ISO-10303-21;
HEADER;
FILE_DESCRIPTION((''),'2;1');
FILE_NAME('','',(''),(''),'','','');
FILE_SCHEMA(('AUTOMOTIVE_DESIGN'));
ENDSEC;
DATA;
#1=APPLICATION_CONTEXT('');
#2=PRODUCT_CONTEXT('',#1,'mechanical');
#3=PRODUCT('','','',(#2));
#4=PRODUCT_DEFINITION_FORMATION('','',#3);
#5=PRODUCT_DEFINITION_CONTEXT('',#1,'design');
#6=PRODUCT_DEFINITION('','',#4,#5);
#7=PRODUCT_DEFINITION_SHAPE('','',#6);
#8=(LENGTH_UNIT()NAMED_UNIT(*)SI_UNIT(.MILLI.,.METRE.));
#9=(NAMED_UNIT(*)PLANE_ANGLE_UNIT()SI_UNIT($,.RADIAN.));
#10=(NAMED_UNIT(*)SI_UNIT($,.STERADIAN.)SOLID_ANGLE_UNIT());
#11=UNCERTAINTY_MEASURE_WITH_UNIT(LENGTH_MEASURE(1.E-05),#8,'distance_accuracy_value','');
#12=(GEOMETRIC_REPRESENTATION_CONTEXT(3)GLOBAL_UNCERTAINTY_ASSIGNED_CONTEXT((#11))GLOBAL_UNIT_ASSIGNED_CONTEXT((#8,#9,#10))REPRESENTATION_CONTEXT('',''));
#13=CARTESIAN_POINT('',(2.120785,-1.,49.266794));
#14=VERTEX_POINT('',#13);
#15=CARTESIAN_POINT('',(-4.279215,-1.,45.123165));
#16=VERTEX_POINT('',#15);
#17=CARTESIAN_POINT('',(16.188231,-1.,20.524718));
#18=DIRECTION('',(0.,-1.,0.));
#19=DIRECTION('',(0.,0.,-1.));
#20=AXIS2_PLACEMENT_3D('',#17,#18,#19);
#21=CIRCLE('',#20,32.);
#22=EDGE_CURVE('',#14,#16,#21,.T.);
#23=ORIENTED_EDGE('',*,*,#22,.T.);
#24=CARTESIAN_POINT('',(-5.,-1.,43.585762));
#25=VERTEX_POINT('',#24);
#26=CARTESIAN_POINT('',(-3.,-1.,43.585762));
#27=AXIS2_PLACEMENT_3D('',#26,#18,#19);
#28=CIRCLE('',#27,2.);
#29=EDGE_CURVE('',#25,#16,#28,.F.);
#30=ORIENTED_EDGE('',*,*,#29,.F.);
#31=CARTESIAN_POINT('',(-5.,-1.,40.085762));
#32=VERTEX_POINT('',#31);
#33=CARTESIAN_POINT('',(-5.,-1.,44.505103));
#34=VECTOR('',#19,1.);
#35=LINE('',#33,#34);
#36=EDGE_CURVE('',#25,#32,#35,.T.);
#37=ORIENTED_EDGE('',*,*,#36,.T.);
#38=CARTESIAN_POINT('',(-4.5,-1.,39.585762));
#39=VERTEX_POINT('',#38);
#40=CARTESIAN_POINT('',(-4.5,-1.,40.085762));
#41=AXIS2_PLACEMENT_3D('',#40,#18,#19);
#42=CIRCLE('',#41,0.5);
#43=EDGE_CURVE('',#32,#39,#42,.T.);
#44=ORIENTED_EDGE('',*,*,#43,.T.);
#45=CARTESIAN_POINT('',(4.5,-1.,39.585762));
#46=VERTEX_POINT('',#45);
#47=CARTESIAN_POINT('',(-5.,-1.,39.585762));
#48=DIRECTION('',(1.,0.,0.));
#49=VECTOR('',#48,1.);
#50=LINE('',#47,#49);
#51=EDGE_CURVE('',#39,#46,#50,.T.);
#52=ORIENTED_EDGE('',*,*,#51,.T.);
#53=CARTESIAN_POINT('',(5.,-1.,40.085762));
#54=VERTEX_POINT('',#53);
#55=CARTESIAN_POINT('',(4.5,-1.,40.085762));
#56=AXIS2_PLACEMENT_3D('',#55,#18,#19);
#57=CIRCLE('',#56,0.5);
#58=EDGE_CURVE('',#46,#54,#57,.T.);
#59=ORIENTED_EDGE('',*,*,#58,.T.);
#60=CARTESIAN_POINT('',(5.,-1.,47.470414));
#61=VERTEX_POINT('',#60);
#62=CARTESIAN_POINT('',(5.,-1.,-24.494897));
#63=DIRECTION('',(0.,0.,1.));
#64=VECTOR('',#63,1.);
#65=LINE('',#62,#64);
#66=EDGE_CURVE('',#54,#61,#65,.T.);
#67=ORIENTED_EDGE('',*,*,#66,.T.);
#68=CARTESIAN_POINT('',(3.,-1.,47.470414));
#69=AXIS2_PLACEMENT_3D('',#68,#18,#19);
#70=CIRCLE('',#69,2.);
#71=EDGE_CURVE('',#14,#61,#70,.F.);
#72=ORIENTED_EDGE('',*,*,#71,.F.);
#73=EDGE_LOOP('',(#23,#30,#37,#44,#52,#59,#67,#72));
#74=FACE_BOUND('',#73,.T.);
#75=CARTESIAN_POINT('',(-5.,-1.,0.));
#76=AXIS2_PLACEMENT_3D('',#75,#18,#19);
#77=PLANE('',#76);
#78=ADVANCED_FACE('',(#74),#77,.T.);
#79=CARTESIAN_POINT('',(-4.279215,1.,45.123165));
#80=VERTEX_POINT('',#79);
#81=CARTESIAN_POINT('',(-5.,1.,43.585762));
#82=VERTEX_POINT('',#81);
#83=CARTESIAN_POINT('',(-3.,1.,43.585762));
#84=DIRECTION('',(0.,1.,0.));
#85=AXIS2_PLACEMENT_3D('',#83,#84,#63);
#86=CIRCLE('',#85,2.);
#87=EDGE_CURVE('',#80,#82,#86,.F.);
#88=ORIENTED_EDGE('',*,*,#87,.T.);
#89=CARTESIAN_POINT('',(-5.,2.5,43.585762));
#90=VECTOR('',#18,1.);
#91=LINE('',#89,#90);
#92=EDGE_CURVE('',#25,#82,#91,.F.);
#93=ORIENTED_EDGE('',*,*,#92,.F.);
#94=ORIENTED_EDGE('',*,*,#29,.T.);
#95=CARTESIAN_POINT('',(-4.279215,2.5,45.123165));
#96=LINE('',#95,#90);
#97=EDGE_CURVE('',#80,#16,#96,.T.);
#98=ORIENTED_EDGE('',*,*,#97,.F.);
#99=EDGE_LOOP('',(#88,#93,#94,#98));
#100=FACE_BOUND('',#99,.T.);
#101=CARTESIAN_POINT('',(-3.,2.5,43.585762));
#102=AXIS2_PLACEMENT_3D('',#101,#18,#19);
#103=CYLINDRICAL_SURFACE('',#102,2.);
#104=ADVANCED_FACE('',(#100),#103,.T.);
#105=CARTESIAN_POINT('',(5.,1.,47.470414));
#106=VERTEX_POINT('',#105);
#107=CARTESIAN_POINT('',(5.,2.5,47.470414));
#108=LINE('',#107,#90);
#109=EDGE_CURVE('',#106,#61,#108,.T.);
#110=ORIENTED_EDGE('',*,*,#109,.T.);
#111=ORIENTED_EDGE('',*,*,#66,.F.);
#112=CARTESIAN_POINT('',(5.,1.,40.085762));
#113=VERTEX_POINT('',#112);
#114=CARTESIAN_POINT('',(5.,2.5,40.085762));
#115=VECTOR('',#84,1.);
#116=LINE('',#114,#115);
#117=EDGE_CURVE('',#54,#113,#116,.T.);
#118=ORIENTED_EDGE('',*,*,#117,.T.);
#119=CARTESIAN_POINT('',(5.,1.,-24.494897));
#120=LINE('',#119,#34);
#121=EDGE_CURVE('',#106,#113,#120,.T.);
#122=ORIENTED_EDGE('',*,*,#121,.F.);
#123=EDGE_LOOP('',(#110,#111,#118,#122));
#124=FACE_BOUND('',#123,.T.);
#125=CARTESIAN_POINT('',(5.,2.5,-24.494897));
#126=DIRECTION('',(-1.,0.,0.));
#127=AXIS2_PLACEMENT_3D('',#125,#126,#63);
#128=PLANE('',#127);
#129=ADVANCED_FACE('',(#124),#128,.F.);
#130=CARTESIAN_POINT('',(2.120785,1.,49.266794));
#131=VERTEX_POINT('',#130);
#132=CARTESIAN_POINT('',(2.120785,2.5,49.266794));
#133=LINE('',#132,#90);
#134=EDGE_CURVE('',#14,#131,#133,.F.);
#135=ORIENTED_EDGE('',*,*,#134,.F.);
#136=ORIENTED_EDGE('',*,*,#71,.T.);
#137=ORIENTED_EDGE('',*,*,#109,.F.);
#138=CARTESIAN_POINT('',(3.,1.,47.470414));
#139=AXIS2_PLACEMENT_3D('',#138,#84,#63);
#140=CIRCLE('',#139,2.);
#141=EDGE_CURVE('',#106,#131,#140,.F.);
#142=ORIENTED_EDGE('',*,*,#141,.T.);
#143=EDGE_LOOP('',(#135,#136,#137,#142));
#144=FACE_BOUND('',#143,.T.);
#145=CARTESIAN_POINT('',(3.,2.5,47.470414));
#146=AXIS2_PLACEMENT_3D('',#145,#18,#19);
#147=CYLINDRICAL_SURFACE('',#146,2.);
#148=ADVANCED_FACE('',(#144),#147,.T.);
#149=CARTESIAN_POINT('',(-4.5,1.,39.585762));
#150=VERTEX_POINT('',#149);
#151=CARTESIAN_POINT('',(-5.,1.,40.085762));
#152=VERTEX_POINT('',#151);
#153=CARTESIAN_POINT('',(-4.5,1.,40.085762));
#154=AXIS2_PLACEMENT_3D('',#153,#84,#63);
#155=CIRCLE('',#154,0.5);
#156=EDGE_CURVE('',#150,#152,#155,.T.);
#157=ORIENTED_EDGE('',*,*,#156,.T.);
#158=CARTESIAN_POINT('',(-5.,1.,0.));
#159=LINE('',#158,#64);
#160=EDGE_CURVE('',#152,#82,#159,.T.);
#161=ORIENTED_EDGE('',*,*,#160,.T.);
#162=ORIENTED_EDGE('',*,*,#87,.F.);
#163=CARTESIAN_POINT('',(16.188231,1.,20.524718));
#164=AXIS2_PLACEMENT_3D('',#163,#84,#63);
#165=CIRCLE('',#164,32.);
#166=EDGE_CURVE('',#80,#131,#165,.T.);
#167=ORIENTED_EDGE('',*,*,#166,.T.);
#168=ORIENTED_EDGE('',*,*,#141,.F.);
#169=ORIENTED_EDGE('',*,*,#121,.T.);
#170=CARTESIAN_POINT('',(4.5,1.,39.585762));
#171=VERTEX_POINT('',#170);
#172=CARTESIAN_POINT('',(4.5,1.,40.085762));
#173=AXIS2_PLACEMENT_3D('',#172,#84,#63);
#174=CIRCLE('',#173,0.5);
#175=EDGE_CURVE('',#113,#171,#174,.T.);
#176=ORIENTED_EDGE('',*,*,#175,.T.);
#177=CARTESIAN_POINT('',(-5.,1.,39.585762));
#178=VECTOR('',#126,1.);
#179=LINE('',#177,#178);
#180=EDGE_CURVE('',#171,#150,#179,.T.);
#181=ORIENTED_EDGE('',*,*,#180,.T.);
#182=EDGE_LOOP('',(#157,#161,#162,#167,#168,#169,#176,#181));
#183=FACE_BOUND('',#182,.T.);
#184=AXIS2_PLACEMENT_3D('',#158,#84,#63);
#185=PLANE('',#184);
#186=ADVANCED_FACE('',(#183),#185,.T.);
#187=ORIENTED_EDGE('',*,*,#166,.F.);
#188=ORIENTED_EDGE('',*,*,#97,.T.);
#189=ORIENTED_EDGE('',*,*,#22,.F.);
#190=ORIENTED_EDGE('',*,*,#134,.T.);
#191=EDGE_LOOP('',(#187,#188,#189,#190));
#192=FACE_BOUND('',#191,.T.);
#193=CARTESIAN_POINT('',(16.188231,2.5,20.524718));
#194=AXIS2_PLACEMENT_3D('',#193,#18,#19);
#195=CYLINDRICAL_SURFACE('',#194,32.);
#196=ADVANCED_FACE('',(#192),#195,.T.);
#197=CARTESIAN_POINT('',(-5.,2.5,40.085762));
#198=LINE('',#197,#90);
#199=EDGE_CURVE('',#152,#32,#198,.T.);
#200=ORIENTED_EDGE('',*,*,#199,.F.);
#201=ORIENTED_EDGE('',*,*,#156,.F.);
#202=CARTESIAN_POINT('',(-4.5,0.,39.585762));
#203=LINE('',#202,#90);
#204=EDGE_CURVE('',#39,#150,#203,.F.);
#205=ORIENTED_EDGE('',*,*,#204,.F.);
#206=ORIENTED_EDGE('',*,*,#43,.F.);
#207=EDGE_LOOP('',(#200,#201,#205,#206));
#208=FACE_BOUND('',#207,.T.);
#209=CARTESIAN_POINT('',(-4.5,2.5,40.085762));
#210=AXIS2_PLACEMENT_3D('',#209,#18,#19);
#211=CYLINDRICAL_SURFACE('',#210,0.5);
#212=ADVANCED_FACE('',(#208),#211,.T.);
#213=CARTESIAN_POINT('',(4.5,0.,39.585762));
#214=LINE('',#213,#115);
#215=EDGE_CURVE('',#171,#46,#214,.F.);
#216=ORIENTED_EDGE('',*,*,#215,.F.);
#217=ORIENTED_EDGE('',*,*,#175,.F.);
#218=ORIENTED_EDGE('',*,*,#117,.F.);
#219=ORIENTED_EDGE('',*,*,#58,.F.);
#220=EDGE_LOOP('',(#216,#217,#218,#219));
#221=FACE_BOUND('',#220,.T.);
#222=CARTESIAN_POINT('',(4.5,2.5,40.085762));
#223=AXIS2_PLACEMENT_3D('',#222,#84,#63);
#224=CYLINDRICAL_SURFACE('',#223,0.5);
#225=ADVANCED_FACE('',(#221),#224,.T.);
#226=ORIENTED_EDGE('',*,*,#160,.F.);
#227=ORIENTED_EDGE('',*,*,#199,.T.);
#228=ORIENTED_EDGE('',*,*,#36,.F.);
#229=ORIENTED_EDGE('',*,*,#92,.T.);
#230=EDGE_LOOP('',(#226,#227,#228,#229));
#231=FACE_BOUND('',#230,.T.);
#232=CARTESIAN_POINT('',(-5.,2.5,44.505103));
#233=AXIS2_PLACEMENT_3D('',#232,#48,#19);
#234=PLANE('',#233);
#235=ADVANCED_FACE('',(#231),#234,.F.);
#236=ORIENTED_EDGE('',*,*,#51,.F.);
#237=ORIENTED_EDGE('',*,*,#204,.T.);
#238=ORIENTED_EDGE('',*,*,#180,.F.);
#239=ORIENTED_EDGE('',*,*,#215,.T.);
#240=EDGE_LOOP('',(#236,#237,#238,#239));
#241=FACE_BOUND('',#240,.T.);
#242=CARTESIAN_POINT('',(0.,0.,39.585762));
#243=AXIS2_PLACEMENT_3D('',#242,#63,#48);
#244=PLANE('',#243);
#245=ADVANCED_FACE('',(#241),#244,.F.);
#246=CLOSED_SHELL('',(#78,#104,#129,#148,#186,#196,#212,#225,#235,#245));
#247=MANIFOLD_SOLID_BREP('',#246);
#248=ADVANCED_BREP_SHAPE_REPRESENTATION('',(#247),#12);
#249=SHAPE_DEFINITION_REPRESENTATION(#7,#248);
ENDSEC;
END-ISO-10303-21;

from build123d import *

# Parameters (mm, degrees)
STOCK_SHORT_HANDLE_L_1_START = -1
STOCK_SHORT_HANDLE_L_1_DEPTH = 2
FILLET1_R                    = 0.5


# Read off the part's stored shape, not the designer's step: Stock-short-handle_L-1
with BuildPart() as part:
    # Stock-short-handle_L-1 outline → Stock-short-handle_L-1 (new body)
    with BuildSketch(Plane(origin=(0, 0, 0), x_dir=(1, 0, 0), z_dir=(0, 1, 0)).offset(STOCK_SHORT_HANDLE_L_1_START)):
        with BuildLine():
            Line((5, -39.585762407), (-5, -39.585762407))
            Line((-5, -39.585762407), (-5, -43.585762407))
            ThreePointArc((-5, -43.585762407), (-4.810860404, -44.434752748), (-4.279215401, -45.123165398))
            ThreePointArc((-4.279215401, -45.123165398), (-1.203063357, -47.386267754), (2.120784599, -49.266793861))
            ThreePointArc((2.120784599, -49.266793861), (4.058671148, -49.167239185), (5, -47.470414091))
            Line((5, -47.470414091), (5, -39.585762407))
        make_face()
    extrude(amount=STOCK_SHORT_HANDLE_L_1_DEPTH)

    # Fillet1
    fillet1_edges = [part.edges().sort_by_distance(p)[0] for p in [
        (5, 0, 39.585762407),
        (-5, 0, 39.585762407),
    ]]
    fillet(fillet1_edges, radius=FILLET1_R)


solid = part.part
